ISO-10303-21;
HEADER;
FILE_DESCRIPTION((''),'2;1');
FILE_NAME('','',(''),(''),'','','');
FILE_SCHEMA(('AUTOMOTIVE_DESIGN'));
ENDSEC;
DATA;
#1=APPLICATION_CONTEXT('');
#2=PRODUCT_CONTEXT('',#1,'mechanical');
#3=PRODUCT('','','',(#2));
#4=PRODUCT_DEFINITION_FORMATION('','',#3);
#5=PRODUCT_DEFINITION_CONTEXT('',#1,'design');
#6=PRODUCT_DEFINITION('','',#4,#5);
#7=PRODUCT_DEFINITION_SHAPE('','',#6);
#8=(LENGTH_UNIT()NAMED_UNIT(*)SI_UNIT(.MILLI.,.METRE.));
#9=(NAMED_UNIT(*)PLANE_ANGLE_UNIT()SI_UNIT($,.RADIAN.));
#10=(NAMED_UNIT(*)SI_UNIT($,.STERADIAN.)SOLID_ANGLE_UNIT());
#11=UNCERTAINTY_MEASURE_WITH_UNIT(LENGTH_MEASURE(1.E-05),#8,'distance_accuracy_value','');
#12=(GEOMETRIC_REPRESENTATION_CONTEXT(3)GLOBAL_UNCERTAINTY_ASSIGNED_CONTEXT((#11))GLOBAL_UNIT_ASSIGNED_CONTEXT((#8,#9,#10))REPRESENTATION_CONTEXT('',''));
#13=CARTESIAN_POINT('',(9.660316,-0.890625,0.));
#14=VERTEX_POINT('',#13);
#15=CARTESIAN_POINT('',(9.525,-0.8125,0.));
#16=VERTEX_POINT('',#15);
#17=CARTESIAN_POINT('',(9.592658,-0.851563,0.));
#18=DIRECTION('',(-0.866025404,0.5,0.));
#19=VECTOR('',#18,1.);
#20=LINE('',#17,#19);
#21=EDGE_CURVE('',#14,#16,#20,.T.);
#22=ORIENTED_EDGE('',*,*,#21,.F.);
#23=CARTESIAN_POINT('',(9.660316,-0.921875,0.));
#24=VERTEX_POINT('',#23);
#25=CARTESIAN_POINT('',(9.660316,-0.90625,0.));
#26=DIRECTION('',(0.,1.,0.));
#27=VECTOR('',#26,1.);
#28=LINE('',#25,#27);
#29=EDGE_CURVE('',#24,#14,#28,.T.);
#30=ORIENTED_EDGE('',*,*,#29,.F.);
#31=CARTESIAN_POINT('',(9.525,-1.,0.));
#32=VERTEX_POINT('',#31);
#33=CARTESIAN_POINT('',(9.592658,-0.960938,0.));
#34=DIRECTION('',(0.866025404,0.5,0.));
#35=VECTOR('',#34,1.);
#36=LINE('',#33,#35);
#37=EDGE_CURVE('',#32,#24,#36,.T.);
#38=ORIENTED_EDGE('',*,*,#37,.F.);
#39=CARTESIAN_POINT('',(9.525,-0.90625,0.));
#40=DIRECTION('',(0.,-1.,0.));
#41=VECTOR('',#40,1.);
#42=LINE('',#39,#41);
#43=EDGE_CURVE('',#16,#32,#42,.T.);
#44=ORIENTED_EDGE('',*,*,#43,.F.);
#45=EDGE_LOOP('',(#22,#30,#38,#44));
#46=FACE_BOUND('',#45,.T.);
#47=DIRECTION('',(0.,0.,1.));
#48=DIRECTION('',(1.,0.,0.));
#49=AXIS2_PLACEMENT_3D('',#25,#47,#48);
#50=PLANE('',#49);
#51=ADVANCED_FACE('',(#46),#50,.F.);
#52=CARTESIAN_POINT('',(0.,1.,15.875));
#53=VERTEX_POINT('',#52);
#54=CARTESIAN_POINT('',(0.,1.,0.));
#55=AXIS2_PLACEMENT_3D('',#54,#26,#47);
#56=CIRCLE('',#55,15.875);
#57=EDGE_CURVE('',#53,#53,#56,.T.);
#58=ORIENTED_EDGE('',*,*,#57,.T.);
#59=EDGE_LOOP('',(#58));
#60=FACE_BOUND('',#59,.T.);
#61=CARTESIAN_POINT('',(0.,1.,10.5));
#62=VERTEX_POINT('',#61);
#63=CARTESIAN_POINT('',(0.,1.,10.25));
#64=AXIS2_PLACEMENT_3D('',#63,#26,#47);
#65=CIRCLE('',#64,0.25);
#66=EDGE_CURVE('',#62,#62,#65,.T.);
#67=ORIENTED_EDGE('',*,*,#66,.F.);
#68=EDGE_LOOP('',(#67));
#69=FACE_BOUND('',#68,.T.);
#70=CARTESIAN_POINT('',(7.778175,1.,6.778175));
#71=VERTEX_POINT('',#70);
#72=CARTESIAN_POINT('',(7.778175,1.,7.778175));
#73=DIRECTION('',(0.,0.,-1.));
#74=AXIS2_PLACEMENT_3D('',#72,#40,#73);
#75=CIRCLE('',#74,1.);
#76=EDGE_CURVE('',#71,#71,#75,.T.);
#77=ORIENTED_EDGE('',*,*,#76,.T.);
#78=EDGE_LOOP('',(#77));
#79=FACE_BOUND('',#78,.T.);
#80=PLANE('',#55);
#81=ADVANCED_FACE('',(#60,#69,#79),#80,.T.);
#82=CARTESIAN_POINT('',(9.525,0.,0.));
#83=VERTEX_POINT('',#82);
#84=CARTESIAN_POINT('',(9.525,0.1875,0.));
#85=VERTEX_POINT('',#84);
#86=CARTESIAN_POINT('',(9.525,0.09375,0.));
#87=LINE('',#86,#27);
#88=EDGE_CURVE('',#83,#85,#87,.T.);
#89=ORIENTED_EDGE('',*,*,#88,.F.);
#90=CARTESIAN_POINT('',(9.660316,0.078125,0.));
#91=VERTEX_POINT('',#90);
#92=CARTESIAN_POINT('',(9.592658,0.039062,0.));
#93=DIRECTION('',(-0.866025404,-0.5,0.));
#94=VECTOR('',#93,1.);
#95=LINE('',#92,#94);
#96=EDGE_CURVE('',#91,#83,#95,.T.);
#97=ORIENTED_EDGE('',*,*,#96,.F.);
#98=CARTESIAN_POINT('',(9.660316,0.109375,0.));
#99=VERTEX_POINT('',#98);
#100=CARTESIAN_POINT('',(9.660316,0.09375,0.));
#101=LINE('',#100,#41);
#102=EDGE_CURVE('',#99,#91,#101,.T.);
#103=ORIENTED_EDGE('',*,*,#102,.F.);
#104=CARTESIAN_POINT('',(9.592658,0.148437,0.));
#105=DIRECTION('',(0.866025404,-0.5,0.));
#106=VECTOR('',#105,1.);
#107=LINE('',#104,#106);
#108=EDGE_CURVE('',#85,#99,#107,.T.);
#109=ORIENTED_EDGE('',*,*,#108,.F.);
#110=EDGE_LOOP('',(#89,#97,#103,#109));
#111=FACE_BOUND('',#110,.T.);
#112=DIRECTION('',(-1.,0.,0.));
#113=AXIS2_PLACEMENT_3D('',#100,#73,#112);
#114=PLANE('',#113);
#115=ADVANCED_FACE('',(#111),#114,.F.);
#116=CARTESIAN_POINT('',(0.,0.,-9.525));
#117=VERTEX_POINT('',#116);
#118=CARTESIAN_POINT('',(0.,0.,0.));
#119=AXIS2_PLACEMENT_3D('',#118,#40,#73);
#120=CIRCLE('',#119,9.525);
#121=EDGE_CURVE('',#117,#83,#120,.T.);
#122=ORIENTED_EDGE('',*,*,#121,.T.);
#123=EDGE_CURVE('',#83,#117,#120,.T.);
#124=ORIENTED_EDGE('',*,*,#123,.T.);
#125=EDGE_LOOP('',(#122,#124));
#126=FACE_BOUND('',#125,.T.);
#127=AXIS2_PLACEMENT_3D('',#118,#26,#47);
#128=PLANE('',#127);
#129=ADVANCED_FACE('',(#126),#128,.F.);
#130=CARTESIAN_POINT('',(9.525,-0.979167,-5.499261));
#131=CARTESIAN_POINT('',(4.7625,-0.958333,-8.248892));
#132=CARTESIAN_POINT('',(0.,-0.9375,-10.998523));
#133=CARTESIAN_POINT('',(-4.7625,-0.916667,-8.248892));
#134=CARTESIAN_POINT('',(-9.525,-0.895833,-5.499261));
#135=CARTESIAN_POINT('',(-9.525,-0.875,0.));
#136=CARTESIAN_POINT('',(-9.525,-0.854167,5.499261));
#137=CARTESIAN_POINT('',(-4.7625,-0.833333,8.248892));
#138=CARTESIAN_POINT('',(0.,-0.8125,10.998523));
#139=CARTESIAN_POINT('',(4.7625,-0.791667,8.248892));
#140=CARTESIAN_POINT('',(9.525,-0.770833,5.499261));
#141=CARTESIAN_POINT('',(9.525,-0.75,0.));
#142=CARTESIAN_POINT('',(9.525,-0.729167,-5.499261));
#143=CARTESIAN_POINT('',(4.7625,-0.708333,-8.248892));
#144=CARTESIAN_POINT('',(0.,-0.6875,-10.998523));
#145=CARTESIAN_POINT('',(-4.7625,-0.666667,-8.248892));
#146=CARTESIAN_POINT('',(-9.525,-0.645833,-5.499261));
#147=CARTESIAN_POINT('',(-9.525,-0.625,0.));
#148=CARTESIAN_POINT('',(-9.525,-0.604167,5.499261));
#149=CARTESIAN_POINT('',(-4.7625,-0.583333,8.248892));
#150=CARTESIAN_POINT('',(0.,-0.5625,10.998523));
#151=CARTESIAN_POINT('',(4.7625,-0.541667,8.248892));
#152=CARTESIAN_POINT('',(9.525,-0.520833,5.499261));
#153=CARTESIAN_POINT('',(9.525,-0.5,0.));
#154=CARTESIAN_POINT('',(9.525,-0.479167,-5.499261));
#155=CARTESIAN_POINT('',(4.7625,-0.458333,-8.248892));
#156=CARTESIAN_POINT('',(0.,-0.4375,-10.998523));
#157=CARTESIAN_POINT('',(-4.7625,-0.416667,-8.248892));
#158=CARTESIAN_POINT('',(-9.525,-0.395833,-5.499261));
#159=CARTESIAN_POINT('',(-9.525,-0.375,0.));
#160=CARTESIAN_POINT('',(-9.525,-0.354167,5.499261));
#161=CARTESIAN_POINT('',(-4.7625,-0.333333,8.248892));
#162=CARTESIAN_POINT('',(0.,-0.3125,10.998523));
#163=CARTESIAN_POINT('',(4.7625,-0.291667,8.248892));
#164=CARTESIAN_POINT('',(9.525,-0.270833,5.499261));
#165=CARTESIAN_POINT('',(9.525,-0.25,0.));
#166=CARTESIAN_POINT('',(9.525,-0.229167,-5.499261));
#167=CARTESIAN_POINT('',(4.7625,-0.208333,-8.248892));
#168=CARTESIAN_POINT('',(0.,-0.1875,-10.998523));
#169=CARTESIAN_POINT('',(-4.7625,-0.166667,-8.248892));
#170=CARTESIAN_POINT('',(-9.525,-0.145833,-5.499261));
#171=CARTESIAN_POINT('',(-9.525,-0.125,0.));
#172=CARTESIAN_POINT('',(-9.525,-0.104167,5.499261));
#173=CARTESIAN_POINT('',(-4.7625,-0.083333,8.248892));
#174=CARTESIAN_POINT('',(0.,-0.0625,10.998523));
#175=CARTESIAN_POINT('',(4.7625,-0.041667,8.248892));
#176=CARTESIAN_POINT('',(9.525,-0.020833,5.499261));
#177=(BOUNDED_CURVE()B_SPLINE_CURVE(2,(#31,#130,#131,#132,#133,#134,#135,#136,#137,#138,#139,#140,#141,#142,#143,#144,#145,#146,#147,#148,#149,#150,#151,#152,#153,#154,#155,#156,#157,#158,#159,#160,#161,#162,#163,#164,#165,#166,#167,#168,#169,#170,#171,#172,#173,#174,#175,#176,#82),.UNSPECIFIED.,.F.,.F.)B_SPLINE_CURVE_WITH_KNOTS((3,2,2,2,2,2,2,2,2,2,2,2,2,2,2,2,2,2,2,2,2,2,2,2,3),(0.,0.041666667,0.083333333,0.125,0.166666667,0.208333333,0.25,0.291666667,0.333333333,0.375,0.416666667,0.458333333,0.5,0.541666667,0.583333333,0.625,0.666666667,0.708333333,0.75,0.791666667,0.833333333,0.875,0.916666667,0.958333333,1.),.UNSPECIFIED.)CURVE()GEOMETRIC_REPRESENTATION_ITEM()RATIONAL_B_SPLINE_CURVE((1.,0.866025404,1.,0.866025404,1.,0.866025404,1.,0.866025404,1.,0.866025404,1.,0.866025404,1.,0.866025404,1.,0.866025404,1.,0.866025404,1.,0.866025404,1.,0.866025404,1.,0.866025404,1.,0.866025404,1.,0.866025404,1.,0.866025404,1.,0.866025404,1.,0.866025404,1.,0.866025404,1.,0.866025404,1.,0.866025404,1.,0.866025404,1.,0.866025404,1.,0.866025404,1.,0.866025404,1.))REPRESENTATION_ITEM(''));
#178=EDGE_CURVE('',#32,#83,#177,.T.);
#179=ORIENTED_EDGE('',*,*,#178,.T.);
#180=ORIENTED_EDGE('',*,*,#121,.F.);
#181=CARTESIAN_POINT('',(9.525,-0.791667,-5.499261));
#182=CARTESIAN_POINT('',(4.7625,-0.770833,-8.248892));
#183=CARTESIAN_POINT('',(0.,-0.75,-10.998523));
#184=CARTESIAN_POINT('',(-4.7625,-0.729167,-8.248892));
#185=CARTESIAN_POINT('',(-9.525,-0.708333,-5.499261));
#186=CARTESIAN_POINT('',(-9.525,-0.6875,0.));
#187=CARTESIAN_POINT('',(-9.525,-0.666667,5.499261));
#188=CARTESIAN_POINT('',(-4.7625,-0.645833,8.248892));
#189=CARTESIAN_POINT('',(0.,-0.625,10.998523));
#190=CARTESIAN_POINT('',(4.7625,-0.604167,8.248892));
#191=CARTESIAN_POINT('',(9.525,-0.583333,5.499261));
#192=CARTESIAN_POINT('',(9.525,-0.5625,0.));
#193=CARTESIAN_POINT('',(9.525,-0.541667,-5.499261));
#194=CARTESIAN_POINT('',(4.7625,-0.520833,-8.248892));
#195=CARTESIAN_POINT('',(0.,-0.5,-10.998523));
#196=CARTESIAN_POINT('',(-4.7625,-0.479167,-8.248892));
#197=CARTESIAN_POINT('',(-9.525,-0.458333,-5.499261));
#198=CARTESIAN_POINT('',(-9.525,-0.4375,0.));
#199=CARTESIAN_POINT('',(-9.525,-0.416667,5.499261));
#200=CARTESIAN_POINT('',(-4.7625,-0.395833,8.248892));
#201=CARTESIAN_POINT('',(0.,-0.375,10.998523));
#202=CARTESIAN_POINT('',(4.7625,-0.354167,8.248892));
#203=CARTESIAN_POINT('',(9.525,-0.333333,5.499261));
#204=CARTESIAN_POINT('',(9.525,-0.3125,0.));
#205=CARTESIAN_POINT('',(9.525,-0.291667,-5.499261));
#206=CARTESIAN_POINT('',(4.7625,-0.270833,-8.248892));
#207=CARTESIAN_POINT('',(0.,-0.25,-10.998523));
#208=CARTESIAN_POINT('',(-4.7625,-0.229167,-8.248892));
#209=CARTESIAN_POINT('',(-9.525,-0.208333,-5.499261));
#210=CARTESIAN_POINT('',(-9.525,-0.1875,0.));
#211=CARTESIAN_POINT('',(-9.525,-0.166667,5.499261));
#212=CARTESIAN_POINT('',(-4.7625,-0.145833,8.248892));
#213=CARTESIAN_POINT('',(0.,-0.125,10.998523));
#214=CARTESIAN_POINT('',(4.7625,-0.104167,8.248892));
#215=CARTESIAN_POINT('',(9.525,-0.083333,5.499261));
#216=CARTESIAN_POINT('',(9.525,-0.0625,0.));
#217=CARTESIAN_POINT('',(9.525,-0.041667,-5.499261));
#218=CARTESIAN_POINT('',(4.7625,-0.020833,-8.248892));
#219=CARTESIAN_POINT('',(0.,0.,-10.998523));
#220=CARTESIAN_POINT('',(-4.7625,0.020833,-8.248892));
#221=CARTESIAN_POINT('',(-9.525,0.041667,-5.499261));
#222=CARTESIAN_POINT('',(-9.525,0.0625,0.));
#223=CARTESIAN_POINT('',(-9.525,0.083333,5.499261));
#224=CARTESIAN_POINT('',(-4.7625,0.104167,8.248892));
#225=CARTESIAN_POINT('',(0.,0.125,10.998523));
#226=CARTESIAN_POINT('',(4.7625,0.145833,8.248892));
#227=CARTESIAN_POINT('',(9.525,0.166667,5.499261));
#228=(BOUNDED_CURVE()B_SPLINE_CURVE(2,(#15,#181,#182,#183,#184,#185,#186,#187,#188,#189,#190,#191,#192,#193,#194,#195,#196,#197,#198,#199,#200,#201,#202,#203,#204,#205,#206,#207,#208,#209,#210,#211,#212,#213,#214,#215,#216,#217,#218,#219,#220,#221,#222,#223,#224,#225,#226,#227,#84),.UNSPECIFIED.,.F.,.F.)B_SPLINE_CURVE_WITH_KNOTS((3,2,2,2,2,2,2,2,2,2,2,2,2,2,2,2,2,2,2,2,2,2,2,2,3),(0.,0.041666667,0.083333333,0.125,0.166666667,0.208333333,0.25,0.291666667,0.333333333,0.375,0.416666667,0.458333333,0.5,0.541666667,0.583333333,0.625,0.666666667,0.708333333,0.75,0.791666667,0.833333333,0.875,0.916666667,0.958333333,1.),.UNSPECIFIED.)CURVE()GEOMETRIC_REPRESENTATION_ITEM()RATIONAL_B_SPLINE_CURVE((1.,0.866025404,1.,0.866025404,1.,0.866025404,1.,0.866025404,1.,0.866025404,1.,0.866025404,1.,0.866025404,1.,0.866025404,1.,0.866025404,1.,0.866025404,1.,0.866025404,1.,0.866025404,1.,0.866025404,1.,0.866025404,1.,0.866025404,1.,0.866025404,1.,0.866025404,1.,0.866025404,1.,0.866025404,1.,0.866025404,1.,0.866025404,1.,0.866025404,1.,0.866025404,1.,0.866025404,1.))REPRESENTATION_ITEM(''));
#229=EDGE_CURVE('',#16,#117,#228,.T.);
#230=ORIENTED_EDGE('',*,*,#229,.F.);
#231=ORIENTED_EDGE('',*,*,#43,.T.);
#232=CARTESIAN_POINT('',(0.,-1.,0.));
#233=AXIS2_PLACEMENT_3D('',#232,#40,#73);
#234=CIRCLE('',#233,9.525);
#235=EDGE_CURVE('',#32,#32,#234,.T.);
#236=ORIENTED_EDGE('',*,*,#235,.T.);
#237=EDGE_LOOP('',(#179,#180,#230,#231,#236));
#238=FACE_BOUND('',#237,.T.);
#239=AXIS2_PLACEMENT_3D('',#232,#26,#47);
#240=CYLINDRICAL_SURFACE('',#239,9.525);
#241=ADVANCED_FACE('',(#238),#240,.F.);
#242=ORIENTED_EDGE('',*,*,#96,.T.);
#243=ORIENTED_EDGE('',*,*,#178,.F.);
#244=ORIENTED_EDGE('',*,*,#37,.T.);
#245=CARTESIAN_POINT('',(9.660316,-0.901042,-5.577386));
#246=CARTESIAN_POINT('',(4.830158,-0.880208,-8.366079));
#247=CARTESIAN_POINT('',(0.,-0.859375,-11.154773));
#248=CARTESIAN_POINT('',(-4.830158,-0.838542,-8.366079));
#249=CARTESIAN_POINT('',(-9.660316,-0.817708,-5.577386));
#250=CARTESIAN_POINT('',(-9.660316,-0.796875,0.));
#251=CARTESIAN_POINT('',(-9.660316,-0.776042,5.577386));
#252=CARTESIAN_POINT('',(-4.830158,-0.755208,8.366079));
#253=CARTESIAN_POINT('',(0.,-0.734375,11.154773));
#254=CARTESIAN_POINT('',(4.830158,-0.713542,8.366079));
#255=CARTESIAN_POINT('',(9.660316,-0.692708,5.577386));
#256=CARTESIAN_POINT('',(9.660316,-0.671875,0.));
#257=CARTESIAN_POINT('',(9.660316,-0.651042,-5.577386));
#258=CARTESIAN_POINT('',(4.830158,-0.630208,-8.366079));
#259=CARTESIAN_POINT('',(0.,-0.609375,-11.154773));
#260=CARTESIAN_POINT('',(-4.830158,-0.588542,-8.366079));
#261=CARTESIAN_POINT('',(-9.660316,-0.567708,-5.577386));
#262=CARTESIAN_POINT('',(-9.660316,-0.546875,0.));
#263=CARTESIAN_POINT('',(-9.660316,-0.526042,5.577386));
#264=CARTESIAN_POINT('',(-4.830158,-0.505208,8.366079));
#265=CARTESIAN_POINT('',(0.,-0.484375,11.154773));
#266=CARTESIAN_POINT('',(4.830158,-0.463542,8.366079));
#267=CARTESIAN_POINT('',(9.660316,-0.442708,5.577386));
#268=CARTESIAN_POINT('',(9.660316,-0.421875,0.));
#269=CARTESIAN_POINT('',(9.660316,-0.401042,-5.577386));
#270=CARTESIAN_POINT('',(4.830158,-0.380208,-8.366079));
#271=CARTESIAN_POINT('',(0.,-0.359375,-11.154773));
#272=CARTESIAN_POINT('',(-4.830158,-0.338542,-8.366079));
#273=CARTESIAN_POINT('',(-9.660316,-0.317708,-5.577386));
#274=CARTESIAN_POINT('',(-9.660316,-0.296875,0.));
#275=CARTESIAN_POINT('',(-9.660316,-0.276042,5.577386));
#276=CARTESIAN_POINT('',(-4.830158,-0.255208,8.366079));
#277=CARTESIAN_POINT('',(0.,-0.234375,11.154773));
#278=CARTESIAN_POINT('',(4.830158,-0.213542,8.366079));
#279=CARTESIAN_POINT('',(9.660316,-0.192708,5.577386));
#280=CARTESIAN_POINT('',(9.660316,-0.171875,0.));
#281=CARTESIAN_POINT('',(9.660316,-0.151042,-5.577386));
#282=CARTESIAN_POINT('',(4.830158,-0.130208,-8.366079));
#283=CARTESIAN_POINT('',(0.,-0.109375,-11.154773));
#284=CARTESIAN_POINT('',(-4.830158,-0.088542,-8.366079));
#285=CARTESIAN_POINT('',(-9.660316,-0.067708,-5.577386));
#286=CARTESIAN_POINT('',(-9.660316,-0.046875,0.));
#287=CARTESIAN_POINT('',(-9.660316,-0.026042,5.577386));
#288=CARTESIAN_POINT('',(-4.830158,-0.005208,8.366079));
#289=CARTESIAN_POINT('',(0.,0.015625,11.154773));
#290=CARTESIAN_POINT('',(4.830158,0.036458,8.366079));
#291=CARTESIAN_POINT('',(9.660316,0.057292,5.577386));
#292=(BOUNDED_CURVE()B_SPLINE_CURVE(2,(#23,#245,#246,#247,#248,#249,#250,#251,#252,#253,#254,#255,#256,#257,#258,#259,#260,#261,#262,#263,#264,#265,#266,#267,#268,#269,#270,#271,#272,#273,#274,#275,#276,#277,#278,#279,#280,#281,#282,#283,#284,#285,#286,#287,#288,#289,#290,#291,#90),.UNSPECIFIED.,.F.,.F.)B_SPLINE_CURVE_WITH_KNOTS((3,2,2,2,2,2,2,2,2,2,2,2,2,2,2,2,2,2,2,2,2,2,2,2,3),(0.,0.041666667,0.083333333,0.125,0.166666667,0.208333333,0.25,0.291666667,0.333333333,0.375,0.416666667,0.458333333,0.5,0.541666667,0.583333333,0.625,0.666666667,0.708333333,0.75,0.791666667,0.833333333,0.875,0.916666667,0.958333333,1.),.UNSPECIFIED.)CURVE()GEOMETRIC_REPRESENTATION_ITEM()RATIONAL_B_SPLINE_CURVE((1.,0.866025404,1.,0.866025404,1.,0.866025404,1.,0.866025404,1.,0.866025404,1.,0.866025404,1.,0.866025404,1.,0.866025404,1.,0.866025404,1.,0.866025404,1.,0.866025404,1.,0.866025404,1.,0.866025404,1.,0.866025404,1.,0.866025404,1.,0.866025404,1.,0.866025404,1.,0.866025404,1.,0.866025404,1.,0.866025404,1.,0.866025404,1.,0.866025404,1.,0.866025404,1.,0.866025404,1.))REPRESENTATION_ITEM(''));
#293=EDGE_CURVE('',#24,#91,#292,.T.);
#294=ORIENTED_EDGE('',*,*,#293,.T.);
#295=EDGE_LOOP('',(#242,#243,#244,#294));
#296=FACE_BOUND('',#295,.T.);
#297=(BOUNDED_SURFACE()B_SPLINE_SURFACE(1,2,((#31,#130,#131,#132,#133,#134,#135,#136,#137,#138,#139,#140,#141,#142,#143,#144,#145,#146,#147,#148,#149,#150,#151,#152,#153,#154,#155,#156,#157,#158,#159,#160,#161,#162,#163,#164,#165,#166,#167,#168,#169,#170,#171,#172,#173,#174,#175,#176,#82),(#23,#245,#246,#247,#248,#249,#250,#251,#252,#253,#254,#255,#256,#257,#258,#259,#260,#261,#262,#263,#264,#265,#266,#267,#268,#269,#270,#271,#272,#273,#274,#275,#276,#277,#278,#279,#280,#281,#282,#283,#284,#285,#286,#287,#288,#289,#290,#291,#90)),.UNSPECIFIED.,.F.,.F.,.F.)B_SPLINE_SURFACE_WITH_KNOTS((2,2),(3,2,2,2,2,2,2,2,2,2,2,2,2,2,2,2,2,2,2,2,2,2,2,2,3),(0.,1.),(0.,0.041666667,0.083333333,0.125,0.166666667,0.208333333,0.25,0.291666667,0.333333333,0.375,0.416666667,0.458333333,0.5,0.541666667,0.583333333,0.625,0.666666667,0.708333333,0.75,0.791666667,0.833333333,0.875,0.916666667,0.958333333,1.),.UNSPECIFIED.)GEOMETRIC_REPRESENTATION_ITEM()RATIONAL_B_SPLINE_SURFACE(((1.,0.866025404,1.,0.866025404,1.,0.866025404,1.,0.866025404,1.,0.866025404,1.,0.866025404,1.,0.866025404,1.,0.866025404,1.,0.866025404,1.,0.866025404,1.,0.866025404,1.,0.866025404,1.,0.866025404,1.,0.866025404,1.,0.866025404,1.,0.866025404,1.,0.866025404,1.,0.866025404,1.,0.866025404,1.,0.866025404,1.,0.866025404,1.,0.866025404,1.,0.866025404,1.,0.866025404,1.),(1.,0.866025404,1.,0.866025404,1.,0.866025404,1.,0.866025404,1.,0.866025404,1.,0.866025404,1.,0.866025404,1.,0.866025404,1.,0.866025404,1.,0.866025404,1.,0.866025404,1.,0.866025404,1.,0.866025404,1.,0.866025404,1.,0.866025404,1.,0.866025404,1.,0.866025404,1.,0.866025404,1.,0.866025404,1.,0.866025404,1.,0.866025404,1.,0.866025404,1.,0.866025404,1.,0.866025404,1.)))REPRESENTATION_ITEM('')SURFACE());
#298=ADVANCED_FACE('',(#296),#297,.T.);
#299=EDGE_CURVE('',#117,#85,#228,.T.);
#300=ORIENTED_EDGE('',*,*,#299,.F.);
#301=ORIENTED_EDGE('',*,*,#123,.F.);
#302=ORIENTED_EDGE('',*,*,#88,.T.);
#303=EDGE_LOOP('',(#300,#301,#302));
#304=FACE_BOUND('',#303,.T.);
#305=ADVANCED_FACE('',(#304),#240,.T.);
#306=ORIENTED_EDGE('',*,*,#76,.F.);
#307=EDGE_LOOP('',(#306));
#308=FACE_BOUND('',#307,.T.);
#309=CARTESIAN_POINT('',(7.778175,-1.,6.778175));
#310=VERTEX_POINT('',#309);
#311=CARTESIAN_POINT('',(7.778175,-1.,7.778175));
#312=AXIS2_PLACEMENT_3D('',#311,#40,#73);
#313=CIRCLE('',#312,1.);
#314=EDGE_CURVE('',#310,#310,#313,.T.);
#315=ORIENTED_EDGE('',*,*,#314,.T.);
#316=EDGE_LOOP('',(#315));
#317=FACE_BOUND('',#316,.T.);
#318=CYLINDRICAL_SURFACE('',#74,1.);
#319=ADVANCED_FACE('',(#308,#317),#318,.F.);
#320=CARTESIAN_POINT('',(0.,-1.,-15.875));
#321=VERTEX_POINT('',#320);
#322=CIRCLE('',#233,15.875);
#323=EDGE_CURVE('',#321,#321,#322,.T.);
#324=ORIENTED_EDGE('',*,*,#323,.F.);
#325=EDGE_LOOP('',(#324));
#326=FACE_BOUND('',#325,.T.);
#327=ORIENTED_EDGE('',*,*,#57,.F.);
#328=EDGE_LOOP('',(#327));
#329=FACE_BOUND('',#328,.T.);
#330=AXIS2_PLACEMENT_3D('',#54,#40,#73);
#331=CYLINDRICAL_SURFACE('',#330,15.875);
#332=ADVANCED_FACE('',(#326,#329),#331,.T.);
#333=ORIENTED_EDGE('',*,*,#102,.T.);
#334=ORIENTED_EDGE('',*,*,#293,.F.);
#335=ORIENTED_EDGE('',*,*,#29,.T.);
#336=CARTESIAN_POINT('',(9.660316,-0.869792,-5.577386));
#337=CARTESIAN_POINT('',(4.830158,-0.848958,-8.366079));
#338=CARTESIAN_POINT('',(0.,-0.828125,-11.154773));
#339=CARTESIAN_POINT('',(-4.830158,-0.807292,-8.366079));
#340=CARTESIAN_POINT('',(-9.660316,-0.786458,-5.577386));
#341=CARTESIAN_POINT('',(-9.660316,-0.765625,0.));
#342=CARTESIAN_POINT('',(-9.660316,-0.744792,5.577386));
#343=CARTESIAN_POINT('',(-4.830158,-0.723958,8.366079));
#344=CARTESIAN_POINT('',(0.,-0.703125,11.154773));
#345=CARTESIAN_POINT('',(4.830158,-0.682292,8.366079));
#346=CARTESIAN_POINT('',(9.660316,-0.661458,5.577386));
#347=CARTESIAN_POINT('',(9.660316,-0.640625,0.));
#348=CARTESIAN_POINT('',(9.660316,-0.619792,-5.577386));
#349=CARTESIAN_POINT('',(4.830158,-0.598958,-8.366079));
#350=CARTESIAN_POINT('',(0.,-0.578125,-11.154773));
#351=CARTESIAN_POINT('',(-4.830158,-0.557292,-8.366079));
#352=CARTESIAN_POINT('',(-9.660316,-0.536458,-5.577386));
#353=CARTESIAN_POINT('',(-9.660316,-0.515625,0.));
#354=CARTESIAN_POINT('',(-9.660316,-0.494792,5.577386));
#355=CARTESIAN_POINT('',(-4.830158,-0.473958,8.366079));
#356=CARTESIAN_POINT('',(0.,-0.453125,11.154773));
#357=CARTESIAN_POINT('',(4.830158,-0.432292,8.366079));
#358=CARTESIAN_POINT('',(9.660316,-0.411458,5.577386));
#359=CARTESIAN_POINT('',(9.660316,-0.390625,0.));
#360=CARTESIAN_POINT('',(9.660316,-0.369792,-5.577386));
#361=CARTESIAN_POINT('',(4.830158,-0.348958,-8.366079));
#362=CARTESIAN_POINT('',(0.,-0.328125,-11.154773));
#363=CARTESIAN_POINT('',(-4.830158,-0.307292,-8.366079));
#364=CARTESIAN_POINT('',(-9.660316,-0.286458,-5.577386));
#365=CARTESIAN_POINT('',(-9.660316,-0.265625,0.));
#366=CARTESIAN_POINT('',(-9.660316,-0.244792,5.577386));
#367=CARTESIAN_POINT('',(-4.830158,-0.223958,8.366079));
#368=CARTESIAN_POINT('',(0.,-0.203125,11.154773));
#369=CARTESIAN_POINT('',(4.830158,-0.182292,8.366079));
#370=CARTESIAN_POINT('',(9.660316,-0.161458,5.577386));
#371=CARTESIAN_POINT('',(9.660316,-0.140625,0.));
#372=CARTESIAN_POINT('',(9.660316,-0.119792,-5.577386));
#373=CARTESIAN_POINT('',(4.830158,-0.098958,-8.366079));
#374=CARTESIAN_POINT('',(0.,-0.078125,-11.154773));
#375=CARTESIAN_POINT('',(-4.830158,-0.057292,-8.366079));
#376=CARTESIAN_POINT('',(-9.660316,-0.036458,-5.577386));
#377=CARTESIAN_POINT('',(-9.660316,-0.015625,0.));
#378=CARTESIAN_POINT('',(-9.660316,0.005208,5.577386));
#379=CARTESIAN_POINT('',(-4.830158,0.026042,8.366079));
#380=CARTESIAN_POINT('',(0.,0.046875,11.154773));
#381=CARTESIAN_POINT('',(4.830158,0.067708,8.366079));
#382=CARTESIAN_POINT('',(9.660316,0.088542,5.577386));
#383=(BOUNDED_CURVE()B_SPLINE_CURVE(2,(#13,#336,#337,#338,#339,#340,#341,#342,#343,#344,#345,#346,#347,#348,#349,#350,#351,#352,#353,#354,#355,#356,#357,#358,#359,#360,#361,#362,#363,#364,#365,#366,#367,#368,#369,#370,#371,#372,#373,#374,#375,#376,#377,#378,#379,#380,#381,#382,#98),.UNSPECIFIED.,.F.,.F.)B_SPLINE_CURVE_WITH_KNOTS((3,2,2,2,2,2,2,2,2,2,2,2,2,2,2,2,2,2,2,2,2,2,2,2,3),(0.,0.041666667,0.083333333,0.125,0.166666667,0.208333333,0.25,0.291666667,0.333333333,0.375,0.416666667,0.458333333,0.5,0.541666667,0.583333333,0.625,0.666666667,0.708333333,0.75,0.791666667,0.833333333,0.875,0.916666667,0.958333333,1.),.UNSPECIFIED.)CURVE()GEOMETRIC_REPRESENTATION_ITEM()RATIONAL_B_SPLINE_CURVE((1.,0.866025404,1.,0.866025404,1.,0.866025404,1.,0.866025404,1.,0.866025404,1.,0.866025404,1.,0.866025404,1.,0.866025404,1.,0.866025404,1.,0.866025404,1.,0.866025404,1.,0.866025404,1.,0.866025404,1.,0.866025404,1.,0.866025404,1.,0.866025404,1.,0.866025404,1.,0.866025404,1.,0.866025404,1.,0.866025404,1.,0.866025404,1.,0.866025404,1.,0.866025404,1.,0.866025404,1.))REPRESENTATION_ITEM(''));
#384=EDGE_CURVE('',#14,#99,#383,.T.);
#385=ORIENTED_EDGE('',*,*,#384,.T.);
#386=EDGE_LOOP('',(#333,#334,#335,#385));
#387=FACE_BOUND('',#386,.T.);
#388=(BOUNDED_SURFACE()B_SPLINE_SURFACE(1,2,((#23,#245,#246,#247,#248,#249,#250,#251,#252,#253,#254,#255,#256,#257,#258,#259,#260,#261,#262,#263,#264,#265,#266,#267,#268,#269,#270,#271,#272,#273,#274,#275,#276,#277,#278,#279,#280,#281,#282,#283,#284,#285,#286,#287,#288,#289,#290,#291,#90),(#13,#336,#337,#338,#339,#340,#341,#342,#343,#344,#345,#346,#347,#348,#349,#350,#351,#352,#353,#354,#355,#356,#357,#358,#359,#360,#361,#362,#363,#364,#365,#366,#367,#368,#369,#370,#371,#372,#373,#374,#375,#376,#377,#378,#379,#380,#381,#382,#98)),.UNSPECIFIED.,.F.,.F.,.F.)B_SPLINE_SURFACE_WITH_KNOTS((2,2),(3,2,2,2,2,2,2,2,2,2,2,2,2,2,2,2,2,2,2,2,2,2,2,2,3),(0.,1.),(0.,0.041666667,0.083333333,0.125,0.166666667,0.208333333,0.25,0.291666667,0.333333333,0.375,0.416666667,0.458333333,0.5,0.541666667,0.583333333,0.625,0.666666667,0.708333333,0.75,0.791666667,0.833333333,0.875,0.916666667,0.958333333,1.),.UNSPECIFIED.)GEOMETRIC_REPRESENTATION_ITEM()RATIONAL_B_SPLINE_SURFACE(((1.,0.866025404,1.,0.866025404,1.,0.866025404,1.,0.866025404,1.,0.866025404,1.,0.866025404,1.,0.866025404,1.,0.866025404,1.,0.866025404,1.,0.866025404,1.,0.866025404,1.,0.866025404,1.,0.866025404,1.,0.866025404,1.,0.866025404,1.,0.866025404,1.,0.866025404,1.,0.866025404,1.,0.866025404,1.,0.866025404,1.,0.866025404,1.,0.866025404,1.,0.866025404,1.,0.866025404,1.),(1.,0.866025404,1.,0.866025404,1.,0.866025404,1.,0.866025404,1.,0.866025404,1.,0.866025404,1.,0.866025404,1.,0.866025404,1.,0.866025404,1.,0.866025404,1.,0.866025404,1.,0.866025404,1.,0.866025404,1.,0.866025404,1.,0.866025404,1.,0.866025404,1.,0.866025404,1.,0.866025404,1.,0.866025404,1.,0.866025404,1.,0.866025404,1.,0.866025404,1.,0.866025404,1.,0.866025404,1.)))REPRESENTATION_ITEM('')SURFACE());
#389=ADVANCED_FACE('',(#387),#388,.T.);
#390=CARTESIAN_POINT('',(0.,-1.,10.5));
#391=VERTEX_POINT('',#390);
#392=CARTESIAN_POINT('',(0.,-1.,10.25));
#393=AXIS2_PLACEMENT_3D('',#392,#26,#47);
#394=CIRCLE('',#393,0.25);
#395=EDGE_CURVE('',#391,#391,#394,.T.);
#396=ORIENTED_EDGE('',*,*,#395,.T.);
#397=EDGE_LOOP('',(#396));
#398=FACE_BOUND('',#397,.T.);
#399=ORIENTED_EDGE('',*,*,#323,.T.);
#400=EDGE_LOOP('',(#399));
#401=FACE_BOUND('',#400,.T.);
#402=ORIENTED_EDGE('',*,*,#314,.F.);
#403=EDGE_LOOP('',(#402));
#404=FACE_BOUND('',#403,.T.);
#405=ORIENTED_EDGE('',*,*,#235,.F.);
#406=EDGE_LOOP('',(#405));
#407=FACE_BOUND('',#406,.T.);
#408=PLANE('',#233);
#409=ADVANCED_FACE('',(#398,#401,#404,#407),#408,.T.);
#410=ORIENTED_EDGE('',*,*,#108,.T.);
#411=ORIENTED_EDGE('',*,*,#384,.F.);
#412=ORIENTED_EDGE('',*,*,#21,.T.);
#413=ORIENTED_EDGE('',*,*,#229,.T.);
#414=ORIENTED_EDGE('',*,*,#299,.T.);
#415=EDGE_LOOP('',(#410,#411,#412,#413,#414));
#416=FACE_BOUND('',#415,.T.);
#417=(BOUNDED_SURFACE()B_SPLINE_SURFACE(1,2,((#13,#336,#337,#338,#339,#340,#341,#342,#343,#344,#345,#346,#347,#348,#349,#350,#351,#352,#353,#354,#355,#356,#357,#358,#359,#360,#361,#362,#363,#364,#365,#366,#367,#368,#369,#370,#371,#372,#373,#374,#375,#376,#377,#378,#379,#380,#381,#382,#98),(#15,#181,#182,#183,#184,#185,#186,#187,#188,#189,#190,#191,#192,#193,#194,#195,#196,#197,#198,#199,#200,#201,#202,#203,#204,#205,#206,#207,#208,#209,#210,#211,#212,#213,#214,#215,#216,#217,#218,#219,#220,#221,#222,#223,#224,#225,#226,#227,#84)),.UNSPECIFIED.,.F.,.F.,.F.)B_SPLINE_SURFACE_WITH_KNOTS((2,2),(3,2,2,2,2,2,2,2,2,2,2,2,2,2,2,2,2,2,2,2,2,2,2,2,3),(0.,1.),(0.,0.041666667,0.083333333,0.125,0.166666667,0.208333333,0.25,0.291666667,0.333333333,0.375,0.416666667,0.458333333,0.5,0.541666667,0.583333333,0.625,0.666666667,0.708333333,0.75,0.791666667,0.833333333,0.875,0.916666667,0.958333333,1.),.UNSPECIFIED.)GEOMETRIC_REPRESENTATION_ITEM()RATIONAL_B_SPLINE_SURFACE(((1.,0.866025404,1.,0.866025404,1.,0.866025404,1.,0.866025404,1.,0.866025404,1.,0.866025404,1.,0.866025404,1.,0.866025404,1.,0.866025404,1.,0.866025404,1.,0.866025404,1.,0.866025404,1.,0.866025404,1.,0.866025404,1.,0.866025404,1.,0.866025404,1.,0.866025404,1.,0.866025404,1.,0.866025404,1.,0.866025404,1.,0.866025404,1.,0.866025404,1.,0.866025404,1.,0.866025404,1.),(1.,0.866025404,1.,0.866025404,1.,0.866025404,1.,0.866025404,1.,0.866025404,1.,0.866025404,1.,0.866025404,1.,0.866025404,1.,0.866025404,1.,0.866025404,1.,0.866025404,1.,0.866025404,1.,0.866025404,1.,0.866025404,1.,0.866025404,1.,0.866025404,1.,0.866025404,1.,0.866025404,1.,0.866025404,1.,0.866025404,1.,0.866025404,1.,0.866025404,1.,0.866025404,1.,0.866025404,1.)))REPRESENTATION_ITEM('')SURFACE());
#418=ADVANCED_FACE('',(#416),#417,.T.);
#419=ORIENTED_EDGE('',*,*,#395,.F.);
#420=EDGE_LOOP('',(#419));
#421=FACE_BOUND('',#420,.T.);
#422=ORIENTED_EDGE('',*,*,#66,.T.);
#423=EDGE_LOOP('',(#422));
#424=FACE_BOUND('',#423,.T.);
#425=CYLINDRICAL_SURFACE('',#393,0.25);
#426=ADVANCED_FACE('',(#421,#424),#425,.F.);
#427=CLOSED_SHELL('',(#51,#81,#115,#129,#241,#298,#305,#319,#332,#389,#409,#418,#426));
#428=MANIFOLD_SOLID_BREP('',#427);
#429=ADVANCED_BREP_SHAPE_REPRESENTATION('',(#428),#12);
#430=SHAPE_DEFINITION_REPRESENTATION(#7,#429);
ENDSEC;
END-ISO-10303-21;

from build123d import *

# Parameters (mm, degrees)
SKETCH1_R               = 15.875
BOSS_EXTRUDE1_DEPTH     = 1
BOSS_EXTRUDE2_START     = 1
SKETCH2_R               = 15.875
SKETCH2_R_2             = 9.525
BOSS_EXTRUDE2_DEPTH     = 1
THREAD1_PITCH           = 0.25
CUT_EXTRUDE1_DEPTH      = 23.539548638
CUT_EXTRUDE1_DEPTH_BACK = 23.539548638
SKETCH3_R               = 0.25
CUT_EXTRUDE2_DEPTH      = 23.539548576
CUT_EXTRUDE2_DEPTH_BACK = 23.539548576
SKETCH4_R               = 1


with BuildPart() as part:
    # Sketch1 → Boss-Extrude1 (new body)
    with BuildSketch(Plane(origin=(0, 0, 0), x_dir=(1, 0, 0), z_dir=(0, 1, 0))):
        with Locations(Location((0, 0, 0), (0, 0, 270))):
            Circle(SKETCH1_R)
    extrude(amount=BOSS_EXTRUDE1_DEPTH)

    # Sketch2 → Boss-Extrude2 (add)
    with BuildSketch(Plane.XZ.offset(BOSS_EXTRUDE2_START)):
        with Locations(Location((0, 0, 0), (0, 0, 270))):
            Circle(SKETCH2_R)
        with Locations(Location((0, 0, 0), (0, 0, 270))):
            Circle(SKETCH2_R_2, mode=Mode.SUBTRACT)
    extrude(amount=-BOSS_EXTRUDE2_DEPTH)

    # Thread1: the profile of Thread Profile1 profile screwed along a right-hand helix of 4 turns, 6 arcs to a turn; built about Z, then put on its axis
    thread1_z = Axis((0, 0, 0), (0, 0, 1))
    thread1_corners = [(9.5247, 0, -0.000173205), (9.660316469, 0, 0.078125), (9.660316469, 0, 0.109375), (9.5247, 0, 0.187673204)]
    with BuildLine(mode=Mode.PRIVATE) as thread1_profile:
        Line(thread1_corners[0], thread1_corners[1])
        Line(thread1_corners[1], thread1_corners[2])
        Line(thread1_corners[2], thread1_corners[3])
        Line(thread1_corners[3], thread1_corners[0])
    thread1_cap = Face(thread1_profile.wire())
    thread1_turn_angles = [0, 30, 60, 90, 120, 150, 180, 210, 240, 270, 300, 330, 360]
    thread1_turn_weights = [1, 0.8660254037844387, 1, 0.8660254037844387, 1, 0.8660254037844387, 1, 0.8660254037844387, 1, 0.8660254037844387, 1, 0.8660254037844387, 1]
    thread1_turn_rails = [Edge.make_bspline([Vector(p[0], p[1], 0).rotate(thread1_z, thread1_turn_angles[k]) / thread1_turn_weights[k] + Vector(0, 0, p[2] + THREAD1_PITCH * thread1_turn_angles[k] / 360) for k in range(13)], [0, 0, 0, 1, 1, 2, 2, 3, 3, 4, 4, 5, 5, 6, 6, 6], 2, thread1_turn_weights) for p in thread1_corners]
    thread1_turn_sides = [Face.make_surface_from_curves(thread1_turn_rails[p[0]], thread1_turn_rails[p[1]]) for p in [(0, 1), (1, 2), (2, 3), (3, 0)]]
    thread1 = Plane(origin=(0, -1, 0), x_dir=(1, 0, 0), z_dir=(0, 1, 0)) * Solid(Shell([*[p.moved(Location((0, 0, THREAD1_PITCH * i))) for i in range(4) for p in thread1_turn_sides], thread1_cap, thread1_cap.rotate(thread1_z, 1440).moved(Location((0, 0, THREAD1_PITCH * 1440 / 360)))]))
    add(thread1, mode=Mode.SUBTRACT)

    # Sketch3 → Cut-Extrude1 (cut, two sides: drawn at the far end of the back side and taken through both)
    with BuildSketch(Plane(origin=(0, 1, 0), x_dir=(1, 0, 0), z_dir=(0, 1, 0)).offset(-CUT_EXTRUDE1_DEPTH_BACK)):
        with Locations(Location((0, -10.25, 0), (0, 0, 270))):
            Circle(SKETCH3_R)
    extrude(amount=CUT_EXTRUDE1_DEPTH + CUT_EXTRUDE1_DEPTH_BACK, mode=Mode.SUBTRACT)

    # Sketch4 → Cut-Extrude2 (cut, two sides: drawn at the far end of the back side and taken through both)
    with BuildSketch(Plane.XZ.offset(1).offset(-CUT_EXTRUDE2_DEPTH_BACK)):
        with Locations(Location((7.778174593, 7.778174593, 0), (0, 0, 270))):
            Circle(SKETCH4_R)
    extrude(amount=CUT_EXTRUDE2_DEPTH + CUT_EXTRUDE2_DEPTH_BACK, mode=Mode.SUBTRACT)


solid = part.part
